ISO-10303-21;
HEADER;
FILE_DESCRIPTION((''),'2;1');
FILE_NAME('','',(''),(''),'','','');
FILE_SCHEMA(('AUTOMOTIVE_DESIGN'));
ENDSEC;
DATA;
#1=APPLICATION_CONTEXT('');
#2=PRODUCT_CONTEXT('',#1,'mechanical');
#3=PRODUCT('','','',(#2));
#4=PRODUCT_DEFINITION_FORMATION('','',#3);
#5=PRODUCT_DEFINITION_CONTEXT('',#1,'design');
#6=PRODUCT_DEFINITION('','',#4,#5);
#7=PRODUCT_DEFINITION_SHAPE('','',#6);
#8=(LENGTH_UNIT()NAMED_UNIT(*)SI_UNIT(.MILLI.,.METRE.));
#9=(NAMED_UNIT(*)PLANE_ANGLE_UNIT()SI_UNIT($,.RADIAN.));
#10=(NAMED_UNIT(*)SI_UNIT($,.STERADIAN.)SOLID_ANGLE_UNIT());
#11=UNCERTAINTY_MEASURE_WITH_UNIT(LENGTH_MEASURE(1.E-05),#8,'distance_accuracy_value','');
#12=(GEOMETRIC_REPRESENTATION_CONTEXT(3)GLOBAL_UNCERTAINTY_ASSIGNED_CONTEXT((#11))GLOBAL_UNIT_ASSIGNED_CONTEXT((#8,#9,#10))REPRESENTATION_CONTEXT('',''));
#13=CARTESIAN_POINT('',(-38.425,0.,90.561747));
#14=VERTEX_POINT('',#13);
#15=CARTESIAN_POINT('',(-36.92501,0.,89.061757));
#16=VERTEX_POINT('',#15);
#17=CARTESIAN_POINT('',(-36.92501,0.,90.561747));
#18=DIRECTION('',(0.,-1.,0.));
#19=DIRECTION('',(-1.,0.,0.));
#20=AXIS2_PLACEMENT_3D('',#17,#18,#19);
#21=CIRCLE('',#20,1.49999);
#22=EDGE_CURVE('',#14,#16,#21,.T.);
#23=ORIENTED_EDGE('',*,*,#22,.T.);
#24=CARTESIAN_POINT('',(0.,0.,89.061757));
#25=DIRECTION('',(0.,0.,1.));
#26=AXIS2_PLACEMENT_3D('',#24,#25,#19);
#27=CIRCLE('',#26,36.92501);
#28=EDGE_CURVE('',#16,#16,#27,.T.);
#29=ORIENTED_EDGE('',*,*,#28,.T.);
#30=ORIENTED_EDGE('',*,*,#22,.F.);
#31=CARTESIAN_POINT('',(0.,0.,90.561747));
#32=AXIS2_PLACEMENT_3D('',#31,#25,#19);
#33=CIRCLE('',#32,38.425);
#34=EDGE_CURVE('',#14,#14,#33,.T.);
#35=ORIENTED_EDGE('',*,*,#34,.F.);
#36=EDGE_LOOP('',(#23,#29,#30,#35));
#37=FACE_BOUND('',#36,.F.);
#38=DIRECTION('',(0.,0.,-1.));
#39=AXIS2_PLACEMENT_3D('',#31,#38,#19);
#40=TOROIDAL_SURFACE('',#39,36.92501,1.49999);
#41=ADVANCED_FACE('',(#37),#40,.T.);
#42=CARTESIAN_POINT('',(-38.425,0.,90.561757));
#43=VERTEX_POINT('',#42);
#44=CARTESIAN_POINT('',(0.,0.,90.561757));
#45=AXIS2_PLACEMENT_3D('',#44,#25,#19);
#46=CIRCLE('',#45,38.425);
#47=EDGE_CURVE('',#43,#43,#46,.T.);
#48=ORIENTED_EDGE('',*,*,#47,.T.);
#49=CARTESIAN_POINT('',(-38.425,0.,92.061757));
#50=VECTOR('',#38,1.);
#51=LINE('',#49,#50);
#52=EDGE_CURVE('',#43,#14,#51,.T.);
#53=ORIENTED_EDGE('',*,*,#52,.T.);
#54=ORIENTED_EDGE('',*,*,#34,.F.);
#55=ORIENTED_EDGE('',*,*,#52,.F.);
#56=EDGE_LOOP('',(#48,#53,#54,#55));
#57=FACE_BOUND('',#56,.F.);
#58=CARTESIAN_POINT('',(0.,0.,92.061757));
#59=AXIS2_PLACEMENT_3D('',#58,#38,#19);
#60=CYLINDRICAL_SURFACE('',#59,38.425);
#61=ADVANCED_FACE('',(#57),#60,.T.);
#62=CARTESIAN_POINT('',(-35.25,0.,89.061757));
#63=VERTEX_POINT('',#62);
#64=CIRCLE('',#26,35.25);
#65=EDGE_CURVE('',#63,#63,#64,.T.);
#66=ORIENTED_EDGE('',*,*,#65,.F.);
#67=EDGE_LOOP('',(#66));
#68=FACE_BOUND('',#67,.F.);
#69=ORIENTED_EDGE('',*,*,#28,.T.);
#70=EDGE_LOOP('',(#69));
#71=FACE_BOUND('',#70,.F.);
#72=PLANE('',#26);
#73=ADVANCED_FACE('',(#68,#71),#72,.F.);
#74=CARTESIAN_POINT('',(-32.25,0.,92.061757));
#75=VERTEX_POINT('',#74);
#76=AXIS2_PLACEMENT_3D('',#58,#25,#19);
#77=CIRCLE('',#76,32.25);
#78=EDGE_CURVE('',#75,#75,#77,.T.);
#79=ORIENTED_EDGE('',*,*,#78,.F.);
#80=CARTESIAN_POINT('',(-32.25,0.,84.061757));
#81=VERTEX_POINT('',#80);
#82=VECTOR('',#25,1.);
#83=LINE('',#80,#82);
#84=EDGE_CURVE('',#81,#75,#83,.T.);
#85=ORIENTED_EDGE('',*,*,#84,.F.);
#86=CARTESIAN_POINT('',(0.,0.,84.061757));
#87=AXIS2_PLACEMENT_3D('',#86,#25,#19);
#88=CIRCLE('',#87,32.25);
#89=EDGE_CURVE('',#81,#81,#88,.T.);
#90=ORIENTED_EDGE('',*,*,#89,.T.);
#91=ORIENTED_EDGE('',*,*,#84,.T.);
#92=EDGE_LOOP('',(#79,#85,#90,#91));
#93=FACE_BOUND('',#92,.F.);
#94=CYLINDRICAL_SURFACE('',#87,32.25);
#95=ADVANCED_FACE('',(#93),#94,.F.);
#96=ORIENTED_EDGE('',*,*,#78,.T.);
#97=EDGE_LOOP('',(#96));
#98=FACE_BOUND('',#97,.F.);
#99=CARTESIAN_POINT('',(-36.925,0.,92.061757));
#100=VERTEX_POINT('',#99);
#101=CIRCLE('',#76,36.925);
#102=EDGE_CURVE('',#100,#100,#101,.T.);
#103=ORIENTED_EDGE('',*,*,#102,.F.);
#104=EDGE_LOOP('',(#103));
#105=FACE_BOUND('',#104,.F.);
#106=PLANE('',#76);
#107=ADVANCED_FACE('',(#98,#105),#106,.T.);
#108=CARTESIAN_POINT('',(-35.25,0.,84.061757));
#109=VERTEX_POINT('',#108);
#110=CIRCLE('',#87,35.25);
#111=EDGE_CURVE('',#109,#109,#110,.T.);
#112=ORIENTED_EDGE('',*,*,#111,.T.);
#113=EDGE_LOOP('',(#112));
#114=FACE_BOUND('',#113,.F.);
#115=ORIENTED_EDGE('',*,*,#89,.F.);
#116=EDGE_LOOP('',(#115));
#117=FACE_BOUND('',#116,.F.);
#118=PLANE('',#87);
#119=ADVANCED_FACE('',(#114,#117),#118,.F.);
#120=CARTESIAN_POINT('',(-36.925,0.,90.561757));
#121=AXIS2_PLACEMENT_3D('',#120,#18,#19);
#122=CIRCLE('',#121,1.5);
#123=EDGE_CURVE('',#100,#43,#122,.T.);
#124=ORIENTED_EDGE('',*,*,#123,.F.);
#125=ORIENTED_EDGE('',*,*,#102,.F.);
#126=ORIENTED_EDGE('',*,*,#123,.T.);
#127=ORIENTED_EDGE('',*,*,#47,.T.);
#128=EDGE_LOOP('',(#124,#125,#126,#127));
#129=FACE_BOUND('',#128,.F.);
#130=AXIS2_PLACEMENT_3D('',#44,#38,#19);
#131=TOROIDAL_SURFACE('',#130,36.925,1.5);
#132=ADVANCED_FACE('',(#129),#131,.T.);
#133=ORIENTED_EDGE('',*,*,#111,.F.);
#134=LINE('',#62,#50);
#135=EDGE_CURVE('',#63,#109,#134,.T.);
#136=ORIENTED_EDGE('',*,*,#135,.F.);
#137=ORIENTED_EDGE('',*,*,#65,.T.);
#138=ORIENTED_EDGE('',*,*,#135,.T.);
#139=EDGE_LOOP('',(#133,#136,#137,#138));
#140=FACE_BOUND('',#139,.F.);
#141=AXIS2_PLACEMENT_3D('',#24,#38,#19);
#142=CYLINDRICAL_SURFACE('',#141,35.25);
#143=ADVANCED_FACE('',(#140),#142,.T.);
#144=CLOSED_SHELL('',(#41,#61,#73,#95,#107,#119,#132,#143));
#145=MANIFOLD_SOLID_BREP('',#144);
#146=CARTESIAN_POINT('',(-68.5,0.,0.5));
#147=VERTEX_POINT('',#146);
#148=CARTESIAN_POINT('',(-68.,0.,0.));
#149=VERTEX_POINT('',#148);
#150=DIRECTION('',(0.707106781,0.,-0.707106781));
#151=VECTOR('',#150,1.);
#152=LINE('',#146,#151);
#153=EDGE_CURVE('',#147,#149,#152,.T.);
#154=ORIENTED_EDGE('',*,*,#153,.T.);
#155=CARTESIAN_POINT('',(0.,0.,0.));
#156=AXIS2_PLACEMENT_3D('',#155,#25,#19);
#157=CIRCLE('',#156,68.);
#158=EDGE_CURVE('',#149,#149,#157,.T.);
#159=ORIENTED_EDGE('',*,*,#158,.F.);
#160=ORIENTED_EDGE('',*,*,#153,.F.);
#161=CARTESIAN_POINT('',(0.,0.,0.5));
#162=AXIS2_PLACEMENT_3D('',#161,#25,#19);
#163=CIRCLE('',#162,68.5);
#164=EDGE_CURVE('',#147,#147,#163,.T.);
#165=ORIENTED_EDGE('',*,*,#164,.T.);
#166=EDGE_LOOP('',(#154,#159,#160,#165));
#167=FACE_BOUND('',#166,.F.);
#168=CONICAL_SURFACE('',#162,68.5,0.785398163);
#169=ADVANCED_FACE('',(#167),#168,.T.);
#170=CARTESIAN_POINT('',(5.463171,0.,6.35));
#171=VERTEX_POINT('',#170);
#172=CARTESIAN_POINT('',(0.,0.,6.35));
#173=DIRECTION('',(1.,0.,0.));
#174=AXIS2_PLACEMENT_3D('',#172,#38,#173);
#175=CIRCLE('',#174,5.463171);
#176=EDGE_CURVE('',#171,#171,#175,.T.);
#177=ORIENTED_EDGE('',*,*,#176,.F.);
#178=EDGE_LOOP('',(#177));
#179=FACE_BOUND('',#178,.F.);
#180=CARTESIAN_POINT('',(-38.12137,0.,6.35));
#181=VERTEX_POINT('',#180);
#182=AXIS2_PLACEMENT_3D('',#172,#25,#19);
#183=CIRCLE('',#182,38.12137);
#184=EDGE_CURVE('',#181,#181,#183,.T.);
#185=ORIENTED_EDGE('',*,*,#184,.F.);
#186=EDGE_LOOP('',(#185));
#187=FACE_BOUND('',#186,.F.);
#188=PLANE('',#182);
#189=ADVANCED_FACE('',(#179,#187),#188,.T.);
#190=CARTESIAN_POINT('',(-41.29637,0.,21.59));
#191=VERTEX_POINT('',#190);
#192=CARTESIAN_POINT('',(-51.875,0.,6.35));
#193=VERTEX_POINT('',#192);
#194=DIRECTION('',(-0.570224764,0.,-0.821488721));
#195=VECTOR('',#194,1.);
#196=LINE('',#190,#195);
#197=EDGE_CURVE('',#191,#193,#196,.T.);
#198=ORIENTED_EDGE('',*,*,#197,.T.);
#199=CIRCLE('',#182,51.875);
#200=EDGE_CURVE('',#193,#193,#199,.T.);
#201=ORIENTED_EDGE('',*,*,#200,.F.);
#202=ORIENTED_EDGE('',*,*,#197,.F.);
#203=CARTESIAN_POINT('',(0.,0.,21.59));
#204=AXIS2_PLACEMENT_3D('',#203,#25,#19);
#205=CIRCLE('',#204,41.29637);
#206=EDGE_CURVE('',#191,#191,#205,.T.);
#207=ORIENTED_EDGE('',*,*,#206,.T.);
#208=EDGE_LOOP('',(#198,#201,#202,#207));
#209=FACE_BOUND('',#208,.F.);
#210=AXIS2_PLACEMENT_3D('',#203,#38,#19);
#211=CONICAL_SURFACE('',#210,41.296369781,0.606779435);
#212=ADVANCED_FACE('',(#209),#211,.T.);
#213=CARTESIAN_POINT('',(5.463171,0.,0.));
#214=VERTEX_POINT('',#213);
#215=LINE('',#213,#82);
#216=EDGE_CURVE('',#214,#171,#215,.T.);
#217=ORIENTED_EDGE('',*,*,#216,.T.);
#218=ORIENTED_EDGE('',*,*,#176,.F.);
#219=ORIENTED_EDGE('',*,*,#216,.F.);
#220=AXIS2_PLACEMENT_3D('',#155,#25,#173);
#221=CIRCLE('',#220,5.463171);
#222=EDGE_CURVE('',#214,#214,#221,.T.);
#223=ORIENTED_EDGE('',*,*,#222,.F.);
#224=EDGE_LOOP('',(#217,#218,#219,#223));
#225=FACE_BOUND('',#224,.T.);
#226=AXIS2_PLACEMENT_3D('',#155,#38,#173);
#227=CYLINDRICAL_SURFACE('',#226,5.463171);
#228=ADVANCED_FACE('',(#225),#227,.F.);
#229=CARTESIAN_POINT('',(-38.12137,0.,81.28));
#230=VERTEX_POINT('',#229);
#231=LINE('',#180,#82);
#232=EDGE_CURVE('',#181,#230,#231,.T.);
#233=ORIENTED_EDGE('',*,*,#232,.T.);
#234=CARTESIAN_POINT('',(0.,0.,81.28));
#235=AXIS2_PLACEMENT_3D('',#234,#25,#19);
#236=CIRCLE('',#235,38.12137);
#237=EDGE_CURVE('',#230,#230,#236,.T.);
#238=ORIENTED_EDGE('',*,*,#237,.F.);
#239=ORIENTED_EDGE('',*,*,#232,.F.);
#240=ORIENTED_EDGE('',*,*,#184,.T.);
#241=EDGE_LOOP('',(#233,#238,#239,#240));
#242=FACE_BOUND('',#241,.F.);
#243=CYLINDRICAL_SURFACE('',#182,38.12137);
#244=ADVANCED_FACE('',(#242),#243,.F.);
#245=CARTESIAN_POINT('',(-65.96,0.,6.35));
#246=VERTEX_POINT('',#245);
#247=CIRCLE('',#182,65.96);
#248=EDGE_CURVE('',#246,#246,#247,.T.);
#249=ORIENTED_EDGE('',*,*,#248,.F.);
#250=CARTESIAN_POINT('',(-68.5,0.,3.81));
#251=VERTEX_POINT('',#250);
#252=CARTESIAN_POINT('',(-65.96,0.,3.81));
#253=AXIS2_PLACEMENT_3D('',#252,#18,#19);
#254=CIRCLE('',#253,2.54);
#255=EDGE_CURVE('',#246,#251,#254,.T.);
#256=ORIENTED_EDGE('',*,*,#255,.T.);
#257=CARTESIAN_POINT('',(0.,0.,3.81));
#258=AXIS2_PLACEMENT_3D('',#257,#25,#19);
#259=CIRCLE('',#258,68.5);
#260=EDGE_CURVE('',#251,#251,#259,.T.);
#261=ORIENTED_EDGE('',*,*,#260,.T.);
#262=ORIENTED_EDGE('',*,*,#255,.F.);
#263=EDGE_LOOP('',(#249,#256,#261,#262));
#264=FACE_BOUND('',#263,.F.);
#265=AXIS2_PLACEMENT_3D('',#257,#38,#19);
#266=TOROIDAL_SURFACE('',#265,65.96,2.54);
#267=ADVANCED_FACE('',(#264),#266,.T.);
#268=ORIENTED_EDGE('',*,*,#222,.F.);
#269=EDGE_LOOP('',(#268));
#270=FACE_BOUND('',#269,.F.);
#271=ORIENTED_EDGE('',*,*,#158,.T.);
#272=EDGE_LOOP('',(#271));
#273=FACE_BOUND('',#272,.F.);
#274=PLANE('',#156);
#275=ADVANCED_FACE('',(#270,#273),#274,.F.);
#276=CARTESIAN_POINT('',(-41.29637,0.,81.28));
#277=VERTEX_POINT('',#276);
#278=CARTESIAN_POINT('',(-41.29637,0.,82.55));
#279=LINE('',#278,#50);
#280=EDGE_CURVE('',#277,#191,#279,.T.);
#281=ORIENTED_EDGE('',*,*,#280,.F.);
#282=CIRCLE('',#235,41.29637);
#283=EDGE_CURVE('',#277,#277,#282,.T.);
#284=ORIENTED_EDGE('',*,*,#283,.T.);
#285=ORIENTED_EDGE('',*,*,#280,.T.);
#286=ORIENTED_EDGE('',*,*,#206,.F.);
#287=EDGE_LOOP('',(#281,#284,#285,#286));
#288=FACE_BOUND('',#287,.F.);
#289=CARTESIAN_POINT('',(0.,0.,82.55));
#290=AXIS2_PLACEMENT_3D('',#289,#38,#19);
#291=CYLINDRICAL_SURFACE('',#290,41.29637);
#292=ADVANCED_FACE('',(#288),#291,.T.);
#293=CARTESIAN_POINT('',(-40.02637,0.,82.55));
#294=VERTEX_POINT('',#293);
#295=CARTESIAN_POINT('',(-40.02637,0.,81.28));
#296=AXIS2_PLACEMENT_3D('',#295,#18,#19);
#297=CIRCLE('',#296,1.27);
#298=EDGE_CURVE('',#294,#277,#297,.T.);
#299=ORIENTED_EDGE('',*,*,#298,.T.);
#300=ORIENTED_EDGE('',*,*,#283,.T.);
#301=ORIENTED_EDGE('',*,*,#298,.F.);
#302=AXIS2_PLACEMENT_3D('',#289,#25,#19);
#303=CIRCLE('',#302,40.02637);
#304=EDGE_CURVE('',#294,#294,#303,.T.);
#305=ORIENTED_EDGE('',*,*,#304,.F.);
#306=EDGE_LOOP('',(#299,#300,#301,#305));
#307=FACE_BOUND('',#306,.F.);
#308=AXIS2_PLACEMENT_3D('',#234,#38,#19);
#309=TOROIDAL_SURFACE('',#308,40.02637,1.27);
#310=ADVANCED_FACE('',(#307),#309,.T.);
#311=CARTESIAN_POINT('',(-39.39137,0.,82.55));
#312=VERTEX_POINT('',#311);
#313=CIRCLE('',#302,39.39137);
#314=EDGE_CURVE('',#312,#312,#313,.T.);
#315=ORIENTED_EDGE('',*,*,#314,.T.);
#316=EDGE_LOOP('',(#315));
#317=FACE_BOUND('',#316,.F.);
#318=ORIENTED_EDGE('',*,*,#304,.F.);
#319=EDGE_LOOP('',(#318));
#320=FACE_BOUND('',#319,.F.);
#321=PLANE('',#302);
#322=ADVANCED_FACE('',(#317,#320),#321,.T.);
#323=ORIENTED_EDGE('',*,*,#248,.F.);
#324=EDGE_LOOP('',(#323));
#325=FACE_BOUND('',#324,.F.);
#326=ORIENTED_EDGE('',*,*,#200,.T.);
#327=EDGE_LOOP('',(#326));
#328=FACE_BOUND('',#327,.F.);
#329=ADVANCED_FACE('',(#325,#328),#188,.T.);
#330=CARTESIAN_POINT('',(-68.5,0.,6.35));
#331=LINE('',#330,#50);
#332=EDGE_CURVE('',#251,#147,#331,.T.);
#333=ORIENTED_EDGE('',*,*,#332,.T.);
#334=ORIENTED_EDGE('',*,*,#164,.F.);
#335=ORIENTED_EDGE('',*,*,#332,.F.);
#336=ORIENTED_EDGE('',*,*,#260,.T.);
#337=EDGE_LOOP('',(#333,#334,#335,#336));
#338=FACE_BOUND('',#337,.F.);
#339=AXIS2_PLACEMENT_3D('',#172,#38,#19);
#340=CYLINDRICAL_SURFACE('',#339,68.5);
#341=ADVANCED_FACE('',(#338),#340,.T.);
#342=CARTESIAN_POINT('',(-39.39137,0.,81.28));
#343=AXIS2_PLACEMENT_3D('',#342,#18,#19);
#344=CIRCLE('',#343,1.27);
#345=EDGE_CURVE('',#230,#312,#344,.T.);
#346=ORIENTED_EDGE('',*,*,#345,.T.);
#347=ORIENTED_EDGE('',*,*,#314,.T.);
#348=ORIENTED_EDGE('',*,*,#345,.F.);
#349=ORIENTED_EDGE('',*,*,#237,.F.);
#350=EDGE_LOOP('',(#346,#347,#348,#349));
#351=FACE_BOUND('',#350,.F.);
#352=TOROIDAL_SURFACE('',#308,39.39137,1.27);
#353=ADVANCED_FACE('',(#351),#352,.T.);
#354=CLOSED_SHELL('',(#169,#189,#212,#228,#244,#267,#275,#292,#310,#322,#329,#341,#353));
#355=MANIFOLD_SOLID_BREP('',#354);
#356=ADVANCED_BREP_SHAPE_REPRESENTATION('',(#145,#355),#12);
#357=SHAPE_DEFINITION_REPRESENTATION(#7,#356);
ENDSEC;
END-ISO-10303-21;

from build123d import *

# Parameters (mm, degrees)
F6_R     = 2.54
F7_R     = 5.4631705107
F8_DEPTH = 82.551
F9_SIZE  = 0.5
F10_R    = 1.27
F11_R    = 1.27
F13_R    = 1.5
F14_R    = 1.49999


# Not quite as in the source:
# - a fillet or chamfer is up to 0.001 mm smaller than in the source, because OpenCascade refuses the exact size


with BuildPart() as f5:
    # F2 (on Front) → F5 (revolve)
    with BuildSketch(Plane.XZ):
        Polygon((-51.875, 6.35), (-68.5, 6.35), (-68.5, 0), (0, 0), (0, 6.35), (-38.1213697813, 6.35), (-38.1213697813, 82.55), (-41.2963697813, 82.55), (-41.2963697813, 21.59), align=None)
    revolve(axis=Axis((0, 0, 3.175), (0, 0, 1)))

    # F6
    f6_edges = [f5.edges().sort_by_distance(p)[0] for p in [
        (68.5, 0, 6.35),
    ]]
    fillet(f6_edges, radius=F6_R)

    # F7 (on Top) → F8 (cut, through all)
    with BuildSketch(Plane.XY):
        Circle(F7_R)
    extrude(amount=F8_DEPTH, mode=Mode.SUBTRACT)

    # F9
    f9_edges = [f5.edges().sort_by_distance(p)[0] for p in [
        (68.5, 0, 0),
    ]]
    chamfer(f9_edges, length=F9_SIZE)

    # F10
    f10_edges = [f5.edges().sort_by_distance(p)[0] for p in [
        (38.12137, 0, 82.55),
    ]]
    fillet(f10_edges, radius=F10_R)

    # F11
    f11_edges = [f5.edges().sort_by_distance(p)[0] for p in [
        (41.29637, 0, 82.55),
    ]]
    fillet(f11_edges, radius=F11_R)


with BuildPart() as f12:
    # F4 (on Front) → F12 (revolve)
    with BuildSketch(Plane.XZ):
        Polygon((-35.25, 89.0617567301), (-35.25, 84.0617567301), (-32.25, 84.0617567301), (-32.25, 92.0617567301), (-38.425, 92.0617567301), (-38.425, 89.0617567301), align=None)
    revolve(axis=Axis((0, 0, 41.1046370864), (0, 0, 1)))

    # F13
    f13_edges = [f12.edges().sort_by_distance(p)[0] for p in [
        (38.425, 0, 92.061757),
    ]]
    fillet(f13_edges, radius=F13_R)

    # F14 (radius 1.5 in the source; OpenCascade refuses exactly that, so slightly less here)
    f14_edges = [f12.edges().sort_by_distance(p)[0] for p in [
        (38.425, 0, 89.061757),
        (-38.425, 0, 89.811757),
        (38.425, 0, 90.561757),
    ]]
    fillet(f14_edges, radius=F14_R)


solid = Compound([f5.part, f12.part])
